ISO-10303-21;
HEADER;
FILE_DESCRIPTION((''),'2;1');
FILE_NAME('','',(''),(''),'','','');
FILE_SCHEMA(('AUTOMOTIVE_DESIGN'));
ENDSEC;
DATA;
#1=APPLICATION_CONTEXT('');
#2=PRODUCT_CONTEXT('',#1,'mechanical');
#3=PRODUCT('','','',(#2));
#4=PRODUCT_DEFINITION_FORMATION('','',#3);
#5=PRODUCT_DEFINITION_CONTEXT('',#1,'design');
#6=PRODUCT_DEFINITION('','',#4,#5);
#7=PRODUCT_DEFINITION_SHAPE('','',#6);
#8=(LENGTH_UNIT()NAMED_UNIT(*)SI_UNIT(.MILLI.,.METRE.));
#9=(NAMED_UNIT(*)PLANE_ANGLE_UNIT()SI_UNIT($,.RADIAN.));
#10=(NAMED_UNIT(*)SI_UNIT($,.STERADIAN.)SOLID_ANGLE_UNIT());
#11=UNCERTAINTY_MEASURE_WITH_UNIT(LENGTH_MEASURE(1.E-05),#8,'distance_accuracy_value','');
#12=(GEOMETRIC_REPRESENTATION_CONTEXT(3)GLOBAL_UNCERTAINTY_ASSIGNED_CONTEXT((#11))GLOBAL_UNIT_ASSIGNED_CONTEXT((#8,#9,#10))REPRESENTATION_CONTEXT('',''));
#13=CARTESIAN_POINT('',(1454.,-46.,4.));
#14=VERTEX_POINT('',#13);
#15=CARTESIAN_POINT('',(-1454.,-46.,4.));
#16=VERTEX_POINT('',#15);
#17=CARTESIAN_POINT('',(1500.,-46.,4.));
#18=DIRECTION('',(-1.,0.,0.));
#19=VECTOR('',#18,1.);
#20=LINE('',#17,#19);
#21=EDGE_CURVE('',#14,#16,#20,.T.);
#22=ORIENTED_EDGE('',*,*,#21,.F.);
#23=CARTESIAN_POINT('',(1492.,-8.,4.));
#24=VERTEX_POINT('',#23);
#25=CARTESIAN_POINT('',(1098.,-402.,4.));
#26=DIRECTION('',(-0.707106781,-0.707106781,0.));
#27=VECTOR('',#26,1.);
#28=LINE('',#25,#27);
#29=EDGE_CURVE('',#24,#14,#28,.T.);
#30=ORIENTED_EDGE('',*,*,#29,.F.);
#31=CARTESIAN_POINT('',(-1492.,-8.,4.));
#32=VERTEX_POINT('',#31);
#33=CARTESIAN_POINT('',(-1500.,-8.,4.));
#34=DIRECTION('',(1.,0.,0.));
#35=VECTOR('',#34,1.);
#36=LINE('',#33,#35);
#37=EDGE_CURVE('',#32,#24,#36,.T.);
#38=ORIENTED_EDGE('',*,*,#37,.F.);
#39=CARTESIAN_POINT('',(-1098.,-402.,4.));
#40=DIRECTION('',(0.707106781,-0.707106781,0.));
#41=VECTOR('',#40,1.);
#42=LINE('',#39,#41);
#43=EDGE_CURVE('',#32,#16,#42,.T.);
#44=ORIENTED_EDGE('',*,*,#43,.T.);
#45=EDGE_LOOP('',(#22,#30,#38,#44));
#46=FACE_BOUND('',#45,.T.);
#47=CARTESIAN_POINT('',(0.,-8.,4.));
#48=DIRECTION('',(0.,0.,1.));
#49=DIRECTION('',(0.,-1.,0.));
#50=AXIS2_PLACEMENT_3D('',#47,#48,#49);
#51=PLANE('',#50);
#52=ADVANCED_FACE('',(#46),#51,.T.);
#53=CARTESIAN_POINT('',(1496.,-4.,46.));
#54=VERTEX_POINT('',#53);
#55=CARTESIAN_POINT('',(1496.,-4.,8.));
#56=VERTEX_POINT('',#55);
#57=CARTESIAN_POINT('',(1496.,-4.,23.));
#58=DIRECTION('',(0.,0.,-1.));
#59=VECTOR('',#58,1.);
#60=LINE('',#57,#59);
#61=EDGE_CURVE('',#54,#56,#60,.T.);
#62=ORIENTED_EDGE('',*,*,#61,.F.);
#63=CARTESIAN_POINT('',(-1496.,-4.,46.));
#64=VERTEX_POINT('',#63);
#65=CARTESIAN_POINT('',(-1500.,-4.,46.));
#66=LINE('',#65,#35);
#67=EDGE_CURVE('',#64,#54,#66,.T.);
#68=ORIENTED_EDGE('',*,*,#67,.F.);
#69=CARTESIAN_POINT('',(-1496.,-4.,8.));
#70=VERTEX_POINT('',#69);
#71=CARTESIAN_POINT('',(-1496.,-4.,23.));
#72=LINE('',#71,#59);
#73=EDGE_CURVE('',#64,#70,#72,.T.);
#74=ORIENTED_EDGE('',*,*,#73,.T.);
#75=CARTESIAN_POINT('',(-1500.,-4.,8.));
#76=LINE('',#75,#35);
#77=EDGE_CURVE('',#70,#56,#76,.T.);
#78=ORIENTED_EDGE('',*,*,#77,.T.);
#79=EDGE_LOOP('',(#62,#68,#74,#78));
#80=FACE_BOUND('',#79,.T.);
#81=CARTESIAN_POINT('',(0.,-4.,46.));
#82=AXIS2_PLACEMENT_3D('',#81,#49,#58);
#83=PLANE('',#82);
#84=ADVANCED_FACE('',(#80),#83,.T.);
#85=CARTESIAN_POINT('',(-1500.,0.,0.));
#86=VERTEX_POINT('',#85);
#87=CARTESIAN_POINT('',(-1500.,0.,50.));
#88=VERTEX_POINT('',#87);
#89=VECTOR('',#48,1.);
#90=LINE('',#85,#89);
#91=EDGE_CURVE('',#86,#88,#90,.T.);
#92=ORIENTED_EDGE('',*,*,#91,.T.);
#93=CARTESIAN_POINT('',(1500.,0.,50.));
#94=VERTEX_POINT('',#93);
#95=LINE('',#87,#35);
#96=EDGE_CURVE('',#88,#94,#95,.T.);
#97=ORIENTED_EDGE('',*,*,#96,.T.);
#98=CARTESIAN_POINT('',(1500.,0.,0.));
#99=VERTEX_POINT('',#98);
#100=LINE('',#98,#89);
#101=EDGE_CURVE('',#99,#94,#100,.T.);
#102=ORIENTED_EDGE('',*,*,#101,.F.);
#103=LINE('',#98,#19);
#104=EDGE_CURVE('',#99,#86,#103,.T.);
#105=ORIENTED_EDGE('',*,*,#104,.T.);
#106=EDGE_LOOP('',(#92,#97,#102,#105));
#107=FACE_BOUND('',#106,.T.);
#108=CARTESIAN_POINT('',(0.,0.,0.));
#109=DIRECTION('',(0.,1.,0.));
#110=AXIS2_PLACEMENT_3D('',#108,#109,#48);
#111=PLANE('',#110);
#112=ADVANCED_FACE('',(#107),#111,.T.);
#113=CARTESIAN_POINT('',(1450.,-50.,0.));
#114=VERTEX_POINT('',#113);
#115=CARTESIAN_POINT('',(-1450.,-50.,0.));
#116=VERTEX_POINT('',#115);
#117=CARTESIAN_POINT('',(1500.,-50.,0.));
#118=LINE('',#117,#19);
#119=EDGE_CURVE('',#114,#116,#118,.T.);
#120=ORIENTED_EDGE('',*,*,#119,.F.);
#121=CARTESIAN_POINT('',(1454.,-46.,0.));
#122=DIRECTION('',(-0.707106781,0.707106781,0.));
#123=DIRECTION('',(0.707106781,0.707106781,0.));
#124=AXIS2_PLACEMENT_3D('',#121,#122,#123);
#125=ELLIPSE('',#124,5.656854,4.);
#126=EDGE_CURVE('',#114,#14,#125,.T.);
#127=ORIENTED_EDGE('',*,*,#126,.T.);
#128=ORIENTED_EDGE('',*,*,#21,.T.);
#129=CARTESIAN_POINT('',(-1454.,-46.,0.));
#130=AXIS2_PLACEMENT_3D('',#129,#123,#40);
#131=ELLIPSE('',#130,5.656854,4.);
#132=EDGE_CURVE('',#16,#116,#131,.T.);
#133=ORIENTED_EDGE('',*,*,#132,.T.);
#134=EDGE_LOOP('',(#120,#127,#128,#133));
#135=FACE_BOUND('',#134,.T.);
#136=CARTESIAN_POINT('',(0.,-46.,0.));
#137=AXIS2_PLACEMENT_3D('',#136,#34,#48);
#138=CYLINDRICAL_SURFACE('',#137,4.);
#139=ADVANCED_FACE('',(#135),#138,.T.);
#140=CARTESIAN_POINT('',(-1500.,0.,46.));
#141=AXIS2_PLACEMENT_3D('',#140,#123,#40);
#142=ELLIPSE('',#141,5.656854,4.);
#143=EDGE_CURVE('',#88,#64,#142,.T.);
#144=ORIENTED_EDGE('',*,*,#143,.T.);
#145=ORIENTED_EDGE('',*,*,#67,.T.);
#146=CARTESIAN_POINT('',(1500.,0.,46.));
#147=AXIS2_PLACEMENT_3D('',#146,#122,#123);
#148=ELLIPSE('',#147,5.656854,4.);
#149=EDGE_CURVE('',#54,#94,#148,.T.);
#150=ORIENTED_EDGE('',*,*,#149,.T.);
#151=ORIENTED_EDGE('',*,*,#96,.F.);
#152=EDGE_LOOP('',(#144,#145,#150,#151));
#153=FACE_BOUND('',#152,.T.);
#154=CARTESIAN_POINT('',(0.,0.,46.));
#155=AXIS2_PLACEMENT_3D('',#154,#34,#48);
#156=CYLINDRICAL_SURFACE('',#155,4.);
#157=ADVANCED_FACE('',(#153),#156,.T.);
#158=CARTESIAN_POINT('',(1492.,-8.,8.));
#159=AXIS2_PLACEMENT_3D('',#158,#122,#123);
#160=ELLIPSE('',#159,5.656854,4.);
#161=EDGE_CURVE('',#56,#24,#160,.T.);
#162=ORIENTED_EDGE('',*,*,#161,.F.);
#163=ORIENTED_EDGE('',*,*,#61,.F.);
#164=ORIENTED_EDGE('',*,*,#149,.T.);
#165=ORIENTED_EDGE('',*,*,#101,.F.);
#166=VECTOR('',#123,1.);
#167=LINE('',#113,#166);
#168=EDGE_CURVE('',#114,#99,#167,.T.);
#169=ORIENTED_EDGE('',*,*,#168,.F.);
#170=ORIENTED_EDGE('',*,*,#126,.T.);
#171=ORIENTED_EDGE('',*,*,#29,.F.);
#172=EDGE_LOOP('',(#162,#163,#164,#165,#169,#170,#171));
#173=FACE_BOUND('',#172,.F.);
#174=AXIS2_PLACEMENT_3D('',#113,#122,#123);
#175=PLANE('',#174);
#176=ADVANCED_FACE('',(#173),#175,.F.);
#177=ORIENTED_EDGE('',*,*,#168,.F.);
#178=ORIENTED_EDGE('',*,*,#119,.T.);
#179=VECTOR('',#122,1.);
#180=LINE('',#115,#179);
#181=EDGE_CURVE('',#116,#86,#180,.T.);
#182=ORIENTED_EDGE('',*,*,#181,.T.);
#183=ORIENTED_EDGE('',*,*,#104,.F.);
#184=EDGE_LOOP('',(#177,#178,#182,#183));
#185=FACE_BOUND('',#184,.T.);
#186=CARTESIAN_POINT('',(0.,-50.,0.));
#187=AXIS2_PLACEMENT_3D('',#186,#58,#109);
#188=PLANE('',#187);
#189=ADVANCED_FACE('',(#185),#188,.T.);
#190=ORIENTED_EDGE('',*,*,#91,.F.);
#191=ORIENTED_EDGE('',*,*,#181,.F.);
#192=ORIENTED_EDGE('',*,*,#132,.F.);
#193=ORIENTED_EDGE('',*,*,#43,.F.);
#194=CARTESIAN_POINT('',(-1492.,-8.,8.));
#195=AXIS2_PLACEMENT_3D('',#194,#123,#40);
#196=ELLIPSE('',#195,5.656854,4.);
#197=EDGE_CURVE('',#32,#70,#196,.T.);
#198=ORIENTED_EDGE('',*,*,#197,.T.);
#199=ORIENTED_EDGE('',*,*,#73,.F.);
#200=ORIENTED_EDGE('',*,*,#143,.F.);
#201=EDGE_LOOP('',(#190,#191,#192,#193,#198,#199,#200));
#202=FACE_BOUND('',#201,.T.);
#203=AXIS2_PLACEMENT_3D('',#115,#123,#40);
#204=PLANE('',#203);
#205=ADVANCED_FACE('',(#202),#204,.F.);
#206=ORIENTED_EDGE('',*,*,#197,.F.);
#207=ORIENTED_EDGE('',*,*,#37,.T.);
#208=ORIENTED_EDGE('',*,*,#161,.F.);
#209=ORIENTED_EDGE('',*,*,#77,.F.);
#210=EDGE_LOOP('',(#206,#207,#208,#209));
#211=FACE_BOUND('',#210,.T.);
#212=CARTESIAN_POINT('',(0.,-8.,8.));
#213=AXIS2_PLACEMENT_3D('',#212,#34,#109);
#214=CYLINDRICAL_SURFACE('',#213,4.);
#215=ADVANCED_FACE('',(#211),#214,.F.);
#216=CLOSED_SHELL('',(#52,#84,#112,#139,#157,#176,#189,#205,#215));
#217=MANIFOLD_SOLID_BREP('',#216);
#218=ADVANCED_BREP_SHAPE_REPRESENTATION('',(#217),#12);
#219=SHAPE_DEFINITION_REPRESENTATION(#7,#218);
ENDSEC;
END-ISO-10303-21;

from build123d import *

# Parameters (mm, degrees)
F1_DEPTH = 1500
F3_DEPTH = 50.001


# Not quite as in the source:
# - a pattern or mirror of a feature is missing from the dataset's text; its kind, count and spacing are read off the source's solid


with BuildPart() as f1:
    # F0 (on Right) → F1 (new body, symmetric)
    with BuildSketch(Plane.YZ):
        with BuildLine():
            Line((0, 0), (0, 50))
            ThreePointArc((0, 50), (-2.8284271247, 48.8284271247), (-4, 46))
            Line((-4, 46), (-4, 8))
            ThreePointArc((-4, 8), (-5.1715728753, 5.1715728753), (-8, 4))
            Line((-8, 4), (-46, 4))
            ThreePointArc((-46, 4), (-48.8284271247, 2.8284271247), (-50, 0))
            Line((-50, 0), (0, 0))
        make_face()
    extrude(amount=F1_DEPTH, both=True)

    # F2 (on face) → F3 (cut, through all)
    with BuildSketch(Plane(origin=(0, 0, 0), x_dir=(1, 0, 0), z_dir=(0, 0, -1))):
        Polygon((1450, 50), (1500, 0), (1500, 50), align=None)
    f3 = extrude(amount=-F3_DEPTH, mode=Mode.SUBTRACT)

    # F3_copies: F3 across plane
    add(f3.mirror(Plane(origin=(0, 0, 0), x_dir=(0, 0, -1), z_dir=(-1, 0, 0))), mode=Mode.SUBTRACT)


solid = f1.part
